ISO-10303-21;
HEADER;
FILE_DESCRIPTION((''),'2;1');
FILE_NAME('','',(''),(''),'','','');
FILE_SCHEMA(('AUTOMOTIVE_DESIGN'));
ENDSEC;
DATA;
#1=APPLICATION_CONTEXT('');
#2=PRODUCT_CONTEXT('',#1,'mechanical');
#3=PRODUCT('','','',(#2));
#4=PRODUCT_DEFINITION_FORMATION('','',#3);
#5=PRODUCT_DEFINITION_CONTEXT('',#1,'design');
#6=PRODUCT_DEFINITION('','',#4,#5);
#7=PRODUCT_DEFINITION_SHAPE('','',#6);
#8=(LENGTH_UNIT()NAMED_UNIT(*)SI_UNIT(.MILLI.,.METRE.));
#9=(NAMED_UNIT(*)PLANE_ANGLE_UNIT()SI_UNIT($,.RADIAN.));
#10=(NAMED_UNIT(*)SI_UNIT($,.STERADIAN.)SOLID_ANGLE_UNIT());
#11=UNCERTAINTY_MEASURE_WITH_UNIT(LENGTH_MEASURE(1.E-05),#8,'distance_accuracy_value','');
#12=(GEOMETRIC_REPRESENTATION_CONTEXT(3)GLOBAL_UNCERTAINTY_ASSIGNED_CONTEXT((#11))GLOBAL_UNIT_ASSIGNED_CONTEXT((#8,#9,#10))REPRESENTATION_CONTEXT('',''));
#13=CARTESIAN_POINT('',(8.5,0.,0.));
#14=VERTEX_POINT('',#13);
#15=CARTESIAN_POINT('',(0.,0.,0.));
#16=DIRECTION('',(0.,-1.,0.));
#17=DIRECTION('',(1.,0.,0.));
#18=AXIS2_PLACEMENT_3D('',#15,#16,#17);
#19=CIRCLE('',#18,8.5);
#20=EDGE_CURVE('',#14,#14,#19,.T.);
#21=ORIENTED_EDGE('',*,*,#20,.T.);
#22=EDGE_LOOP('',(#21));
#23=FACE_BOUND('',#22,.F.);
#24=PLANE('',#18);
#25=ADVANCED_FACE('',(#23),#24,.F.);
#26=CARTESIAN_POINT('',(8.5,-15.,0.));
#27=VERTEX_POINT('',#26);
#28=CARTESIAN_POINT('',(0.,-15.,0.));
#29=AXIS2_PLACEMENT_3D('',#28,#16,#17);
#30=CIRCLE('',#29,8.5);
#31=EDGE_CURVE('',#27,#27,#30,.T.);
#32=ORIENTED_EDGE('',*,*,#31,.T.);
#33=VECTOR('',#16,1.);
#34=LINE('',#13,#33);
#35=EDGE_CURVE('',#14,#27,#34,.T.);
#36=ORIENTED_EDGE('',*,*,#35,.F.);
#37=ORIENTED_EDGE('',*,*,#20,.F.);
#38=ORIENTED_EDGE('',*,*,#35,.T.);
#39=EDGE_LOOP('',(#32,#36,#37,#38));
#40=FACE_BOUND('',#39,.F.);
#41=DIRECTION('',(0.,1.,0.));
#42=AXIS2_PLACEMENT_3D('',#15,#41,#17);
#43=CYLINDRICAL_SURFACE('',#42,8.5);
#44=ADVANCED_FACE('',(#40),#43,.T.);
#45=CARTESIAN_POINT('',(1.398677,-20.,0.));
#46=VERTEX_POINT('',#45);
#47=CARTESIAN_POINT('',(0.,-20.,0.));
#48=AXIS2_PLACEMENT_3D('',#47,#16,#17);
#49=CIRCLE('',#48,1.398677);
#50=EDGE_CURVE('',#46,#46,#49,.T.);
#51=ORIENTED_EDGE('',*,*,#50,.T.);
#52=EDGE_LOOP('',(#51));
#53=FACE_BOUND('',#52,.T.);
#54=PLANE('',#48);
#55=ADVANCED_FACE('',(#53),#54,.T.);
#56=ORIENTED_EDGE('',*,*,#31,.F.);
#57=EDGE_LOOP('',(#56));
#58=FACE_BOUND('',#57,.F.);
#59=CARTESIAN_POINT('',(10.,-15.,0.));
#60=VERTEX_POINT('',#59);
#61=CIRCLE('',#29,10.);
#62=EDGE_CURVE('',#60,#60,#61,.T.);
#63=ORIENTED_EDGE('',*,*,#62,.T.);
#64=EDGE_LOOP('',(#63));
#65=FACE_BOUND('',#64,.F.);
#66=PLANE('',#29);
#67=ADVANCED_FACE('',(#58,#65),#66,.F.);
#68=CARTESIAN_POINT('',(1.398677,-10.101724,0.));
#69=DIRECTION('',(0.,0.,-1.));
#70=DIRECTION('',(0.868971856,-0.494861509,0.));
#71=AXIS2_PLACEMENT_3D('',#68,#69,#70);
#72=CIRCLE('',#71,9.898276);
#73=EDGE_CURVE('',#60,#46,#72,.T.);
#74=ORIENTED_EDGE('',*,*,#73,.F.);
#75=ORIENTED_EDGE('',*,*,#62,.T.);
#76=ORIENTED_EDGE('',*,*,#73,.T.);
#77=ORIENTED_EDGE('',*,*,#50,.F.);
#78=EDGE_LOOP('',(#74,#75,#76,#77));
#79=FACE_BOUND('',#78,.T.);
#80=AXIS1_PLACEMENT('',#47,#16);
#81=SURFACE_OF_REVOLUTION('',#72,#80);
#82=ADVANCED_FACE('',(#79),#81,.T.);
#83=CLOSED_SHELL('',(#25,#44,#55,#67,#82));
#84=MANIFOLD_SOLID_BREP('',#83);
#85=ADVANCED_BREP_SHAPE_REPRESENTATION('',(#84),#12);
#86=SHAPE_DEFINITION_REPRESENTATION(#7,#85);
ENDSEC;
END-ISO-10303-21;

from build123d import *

# Parameters (mm, degrees)
F0_R     = 8.5
F1_DEPTH = 15
F2_R     = 10
F3_DEPTH = 5


# Not quite as in the source:
# - a fillet or chamfer that OpenCascade refuses, or shapes differently, is made with other operations: its cross-section is extruded or revolved along the edge and cut away or added


with BuildPart() as f1:
    # F0 (on Front) → F1 (new body)
    with BuildSketch(Plane.XZ):
        Circle(F0_R)
    extrude(amount=F1_DEPTH)

    # F2 (on face) → F3 (join)
    with BuildSketch(Plane.XZ.offset(15)):
        Circle(F2_R)
    extrude(amount=F3_DEPTH)

    # F4: fillet of radius 9.8982756057 on 1 edges, made by hand

    # F4_s1 → F4_t2 (revolve, cut)
    with BuildSketch(Plane.XY):
        with BuildLine():
            ThreePointArc((10, -15), (6.3731809715, -18.6591872749), (1.3986770752, -20))
            Line((1.3986770752, -20), (10, -20))
            Line((10, -20), (10, -15))
        make_face()
    revolve(axis=Axis((0, -20, 0), (0, -1, 0)), mode=Mode.SUBTRACT)


solid = f1.part
